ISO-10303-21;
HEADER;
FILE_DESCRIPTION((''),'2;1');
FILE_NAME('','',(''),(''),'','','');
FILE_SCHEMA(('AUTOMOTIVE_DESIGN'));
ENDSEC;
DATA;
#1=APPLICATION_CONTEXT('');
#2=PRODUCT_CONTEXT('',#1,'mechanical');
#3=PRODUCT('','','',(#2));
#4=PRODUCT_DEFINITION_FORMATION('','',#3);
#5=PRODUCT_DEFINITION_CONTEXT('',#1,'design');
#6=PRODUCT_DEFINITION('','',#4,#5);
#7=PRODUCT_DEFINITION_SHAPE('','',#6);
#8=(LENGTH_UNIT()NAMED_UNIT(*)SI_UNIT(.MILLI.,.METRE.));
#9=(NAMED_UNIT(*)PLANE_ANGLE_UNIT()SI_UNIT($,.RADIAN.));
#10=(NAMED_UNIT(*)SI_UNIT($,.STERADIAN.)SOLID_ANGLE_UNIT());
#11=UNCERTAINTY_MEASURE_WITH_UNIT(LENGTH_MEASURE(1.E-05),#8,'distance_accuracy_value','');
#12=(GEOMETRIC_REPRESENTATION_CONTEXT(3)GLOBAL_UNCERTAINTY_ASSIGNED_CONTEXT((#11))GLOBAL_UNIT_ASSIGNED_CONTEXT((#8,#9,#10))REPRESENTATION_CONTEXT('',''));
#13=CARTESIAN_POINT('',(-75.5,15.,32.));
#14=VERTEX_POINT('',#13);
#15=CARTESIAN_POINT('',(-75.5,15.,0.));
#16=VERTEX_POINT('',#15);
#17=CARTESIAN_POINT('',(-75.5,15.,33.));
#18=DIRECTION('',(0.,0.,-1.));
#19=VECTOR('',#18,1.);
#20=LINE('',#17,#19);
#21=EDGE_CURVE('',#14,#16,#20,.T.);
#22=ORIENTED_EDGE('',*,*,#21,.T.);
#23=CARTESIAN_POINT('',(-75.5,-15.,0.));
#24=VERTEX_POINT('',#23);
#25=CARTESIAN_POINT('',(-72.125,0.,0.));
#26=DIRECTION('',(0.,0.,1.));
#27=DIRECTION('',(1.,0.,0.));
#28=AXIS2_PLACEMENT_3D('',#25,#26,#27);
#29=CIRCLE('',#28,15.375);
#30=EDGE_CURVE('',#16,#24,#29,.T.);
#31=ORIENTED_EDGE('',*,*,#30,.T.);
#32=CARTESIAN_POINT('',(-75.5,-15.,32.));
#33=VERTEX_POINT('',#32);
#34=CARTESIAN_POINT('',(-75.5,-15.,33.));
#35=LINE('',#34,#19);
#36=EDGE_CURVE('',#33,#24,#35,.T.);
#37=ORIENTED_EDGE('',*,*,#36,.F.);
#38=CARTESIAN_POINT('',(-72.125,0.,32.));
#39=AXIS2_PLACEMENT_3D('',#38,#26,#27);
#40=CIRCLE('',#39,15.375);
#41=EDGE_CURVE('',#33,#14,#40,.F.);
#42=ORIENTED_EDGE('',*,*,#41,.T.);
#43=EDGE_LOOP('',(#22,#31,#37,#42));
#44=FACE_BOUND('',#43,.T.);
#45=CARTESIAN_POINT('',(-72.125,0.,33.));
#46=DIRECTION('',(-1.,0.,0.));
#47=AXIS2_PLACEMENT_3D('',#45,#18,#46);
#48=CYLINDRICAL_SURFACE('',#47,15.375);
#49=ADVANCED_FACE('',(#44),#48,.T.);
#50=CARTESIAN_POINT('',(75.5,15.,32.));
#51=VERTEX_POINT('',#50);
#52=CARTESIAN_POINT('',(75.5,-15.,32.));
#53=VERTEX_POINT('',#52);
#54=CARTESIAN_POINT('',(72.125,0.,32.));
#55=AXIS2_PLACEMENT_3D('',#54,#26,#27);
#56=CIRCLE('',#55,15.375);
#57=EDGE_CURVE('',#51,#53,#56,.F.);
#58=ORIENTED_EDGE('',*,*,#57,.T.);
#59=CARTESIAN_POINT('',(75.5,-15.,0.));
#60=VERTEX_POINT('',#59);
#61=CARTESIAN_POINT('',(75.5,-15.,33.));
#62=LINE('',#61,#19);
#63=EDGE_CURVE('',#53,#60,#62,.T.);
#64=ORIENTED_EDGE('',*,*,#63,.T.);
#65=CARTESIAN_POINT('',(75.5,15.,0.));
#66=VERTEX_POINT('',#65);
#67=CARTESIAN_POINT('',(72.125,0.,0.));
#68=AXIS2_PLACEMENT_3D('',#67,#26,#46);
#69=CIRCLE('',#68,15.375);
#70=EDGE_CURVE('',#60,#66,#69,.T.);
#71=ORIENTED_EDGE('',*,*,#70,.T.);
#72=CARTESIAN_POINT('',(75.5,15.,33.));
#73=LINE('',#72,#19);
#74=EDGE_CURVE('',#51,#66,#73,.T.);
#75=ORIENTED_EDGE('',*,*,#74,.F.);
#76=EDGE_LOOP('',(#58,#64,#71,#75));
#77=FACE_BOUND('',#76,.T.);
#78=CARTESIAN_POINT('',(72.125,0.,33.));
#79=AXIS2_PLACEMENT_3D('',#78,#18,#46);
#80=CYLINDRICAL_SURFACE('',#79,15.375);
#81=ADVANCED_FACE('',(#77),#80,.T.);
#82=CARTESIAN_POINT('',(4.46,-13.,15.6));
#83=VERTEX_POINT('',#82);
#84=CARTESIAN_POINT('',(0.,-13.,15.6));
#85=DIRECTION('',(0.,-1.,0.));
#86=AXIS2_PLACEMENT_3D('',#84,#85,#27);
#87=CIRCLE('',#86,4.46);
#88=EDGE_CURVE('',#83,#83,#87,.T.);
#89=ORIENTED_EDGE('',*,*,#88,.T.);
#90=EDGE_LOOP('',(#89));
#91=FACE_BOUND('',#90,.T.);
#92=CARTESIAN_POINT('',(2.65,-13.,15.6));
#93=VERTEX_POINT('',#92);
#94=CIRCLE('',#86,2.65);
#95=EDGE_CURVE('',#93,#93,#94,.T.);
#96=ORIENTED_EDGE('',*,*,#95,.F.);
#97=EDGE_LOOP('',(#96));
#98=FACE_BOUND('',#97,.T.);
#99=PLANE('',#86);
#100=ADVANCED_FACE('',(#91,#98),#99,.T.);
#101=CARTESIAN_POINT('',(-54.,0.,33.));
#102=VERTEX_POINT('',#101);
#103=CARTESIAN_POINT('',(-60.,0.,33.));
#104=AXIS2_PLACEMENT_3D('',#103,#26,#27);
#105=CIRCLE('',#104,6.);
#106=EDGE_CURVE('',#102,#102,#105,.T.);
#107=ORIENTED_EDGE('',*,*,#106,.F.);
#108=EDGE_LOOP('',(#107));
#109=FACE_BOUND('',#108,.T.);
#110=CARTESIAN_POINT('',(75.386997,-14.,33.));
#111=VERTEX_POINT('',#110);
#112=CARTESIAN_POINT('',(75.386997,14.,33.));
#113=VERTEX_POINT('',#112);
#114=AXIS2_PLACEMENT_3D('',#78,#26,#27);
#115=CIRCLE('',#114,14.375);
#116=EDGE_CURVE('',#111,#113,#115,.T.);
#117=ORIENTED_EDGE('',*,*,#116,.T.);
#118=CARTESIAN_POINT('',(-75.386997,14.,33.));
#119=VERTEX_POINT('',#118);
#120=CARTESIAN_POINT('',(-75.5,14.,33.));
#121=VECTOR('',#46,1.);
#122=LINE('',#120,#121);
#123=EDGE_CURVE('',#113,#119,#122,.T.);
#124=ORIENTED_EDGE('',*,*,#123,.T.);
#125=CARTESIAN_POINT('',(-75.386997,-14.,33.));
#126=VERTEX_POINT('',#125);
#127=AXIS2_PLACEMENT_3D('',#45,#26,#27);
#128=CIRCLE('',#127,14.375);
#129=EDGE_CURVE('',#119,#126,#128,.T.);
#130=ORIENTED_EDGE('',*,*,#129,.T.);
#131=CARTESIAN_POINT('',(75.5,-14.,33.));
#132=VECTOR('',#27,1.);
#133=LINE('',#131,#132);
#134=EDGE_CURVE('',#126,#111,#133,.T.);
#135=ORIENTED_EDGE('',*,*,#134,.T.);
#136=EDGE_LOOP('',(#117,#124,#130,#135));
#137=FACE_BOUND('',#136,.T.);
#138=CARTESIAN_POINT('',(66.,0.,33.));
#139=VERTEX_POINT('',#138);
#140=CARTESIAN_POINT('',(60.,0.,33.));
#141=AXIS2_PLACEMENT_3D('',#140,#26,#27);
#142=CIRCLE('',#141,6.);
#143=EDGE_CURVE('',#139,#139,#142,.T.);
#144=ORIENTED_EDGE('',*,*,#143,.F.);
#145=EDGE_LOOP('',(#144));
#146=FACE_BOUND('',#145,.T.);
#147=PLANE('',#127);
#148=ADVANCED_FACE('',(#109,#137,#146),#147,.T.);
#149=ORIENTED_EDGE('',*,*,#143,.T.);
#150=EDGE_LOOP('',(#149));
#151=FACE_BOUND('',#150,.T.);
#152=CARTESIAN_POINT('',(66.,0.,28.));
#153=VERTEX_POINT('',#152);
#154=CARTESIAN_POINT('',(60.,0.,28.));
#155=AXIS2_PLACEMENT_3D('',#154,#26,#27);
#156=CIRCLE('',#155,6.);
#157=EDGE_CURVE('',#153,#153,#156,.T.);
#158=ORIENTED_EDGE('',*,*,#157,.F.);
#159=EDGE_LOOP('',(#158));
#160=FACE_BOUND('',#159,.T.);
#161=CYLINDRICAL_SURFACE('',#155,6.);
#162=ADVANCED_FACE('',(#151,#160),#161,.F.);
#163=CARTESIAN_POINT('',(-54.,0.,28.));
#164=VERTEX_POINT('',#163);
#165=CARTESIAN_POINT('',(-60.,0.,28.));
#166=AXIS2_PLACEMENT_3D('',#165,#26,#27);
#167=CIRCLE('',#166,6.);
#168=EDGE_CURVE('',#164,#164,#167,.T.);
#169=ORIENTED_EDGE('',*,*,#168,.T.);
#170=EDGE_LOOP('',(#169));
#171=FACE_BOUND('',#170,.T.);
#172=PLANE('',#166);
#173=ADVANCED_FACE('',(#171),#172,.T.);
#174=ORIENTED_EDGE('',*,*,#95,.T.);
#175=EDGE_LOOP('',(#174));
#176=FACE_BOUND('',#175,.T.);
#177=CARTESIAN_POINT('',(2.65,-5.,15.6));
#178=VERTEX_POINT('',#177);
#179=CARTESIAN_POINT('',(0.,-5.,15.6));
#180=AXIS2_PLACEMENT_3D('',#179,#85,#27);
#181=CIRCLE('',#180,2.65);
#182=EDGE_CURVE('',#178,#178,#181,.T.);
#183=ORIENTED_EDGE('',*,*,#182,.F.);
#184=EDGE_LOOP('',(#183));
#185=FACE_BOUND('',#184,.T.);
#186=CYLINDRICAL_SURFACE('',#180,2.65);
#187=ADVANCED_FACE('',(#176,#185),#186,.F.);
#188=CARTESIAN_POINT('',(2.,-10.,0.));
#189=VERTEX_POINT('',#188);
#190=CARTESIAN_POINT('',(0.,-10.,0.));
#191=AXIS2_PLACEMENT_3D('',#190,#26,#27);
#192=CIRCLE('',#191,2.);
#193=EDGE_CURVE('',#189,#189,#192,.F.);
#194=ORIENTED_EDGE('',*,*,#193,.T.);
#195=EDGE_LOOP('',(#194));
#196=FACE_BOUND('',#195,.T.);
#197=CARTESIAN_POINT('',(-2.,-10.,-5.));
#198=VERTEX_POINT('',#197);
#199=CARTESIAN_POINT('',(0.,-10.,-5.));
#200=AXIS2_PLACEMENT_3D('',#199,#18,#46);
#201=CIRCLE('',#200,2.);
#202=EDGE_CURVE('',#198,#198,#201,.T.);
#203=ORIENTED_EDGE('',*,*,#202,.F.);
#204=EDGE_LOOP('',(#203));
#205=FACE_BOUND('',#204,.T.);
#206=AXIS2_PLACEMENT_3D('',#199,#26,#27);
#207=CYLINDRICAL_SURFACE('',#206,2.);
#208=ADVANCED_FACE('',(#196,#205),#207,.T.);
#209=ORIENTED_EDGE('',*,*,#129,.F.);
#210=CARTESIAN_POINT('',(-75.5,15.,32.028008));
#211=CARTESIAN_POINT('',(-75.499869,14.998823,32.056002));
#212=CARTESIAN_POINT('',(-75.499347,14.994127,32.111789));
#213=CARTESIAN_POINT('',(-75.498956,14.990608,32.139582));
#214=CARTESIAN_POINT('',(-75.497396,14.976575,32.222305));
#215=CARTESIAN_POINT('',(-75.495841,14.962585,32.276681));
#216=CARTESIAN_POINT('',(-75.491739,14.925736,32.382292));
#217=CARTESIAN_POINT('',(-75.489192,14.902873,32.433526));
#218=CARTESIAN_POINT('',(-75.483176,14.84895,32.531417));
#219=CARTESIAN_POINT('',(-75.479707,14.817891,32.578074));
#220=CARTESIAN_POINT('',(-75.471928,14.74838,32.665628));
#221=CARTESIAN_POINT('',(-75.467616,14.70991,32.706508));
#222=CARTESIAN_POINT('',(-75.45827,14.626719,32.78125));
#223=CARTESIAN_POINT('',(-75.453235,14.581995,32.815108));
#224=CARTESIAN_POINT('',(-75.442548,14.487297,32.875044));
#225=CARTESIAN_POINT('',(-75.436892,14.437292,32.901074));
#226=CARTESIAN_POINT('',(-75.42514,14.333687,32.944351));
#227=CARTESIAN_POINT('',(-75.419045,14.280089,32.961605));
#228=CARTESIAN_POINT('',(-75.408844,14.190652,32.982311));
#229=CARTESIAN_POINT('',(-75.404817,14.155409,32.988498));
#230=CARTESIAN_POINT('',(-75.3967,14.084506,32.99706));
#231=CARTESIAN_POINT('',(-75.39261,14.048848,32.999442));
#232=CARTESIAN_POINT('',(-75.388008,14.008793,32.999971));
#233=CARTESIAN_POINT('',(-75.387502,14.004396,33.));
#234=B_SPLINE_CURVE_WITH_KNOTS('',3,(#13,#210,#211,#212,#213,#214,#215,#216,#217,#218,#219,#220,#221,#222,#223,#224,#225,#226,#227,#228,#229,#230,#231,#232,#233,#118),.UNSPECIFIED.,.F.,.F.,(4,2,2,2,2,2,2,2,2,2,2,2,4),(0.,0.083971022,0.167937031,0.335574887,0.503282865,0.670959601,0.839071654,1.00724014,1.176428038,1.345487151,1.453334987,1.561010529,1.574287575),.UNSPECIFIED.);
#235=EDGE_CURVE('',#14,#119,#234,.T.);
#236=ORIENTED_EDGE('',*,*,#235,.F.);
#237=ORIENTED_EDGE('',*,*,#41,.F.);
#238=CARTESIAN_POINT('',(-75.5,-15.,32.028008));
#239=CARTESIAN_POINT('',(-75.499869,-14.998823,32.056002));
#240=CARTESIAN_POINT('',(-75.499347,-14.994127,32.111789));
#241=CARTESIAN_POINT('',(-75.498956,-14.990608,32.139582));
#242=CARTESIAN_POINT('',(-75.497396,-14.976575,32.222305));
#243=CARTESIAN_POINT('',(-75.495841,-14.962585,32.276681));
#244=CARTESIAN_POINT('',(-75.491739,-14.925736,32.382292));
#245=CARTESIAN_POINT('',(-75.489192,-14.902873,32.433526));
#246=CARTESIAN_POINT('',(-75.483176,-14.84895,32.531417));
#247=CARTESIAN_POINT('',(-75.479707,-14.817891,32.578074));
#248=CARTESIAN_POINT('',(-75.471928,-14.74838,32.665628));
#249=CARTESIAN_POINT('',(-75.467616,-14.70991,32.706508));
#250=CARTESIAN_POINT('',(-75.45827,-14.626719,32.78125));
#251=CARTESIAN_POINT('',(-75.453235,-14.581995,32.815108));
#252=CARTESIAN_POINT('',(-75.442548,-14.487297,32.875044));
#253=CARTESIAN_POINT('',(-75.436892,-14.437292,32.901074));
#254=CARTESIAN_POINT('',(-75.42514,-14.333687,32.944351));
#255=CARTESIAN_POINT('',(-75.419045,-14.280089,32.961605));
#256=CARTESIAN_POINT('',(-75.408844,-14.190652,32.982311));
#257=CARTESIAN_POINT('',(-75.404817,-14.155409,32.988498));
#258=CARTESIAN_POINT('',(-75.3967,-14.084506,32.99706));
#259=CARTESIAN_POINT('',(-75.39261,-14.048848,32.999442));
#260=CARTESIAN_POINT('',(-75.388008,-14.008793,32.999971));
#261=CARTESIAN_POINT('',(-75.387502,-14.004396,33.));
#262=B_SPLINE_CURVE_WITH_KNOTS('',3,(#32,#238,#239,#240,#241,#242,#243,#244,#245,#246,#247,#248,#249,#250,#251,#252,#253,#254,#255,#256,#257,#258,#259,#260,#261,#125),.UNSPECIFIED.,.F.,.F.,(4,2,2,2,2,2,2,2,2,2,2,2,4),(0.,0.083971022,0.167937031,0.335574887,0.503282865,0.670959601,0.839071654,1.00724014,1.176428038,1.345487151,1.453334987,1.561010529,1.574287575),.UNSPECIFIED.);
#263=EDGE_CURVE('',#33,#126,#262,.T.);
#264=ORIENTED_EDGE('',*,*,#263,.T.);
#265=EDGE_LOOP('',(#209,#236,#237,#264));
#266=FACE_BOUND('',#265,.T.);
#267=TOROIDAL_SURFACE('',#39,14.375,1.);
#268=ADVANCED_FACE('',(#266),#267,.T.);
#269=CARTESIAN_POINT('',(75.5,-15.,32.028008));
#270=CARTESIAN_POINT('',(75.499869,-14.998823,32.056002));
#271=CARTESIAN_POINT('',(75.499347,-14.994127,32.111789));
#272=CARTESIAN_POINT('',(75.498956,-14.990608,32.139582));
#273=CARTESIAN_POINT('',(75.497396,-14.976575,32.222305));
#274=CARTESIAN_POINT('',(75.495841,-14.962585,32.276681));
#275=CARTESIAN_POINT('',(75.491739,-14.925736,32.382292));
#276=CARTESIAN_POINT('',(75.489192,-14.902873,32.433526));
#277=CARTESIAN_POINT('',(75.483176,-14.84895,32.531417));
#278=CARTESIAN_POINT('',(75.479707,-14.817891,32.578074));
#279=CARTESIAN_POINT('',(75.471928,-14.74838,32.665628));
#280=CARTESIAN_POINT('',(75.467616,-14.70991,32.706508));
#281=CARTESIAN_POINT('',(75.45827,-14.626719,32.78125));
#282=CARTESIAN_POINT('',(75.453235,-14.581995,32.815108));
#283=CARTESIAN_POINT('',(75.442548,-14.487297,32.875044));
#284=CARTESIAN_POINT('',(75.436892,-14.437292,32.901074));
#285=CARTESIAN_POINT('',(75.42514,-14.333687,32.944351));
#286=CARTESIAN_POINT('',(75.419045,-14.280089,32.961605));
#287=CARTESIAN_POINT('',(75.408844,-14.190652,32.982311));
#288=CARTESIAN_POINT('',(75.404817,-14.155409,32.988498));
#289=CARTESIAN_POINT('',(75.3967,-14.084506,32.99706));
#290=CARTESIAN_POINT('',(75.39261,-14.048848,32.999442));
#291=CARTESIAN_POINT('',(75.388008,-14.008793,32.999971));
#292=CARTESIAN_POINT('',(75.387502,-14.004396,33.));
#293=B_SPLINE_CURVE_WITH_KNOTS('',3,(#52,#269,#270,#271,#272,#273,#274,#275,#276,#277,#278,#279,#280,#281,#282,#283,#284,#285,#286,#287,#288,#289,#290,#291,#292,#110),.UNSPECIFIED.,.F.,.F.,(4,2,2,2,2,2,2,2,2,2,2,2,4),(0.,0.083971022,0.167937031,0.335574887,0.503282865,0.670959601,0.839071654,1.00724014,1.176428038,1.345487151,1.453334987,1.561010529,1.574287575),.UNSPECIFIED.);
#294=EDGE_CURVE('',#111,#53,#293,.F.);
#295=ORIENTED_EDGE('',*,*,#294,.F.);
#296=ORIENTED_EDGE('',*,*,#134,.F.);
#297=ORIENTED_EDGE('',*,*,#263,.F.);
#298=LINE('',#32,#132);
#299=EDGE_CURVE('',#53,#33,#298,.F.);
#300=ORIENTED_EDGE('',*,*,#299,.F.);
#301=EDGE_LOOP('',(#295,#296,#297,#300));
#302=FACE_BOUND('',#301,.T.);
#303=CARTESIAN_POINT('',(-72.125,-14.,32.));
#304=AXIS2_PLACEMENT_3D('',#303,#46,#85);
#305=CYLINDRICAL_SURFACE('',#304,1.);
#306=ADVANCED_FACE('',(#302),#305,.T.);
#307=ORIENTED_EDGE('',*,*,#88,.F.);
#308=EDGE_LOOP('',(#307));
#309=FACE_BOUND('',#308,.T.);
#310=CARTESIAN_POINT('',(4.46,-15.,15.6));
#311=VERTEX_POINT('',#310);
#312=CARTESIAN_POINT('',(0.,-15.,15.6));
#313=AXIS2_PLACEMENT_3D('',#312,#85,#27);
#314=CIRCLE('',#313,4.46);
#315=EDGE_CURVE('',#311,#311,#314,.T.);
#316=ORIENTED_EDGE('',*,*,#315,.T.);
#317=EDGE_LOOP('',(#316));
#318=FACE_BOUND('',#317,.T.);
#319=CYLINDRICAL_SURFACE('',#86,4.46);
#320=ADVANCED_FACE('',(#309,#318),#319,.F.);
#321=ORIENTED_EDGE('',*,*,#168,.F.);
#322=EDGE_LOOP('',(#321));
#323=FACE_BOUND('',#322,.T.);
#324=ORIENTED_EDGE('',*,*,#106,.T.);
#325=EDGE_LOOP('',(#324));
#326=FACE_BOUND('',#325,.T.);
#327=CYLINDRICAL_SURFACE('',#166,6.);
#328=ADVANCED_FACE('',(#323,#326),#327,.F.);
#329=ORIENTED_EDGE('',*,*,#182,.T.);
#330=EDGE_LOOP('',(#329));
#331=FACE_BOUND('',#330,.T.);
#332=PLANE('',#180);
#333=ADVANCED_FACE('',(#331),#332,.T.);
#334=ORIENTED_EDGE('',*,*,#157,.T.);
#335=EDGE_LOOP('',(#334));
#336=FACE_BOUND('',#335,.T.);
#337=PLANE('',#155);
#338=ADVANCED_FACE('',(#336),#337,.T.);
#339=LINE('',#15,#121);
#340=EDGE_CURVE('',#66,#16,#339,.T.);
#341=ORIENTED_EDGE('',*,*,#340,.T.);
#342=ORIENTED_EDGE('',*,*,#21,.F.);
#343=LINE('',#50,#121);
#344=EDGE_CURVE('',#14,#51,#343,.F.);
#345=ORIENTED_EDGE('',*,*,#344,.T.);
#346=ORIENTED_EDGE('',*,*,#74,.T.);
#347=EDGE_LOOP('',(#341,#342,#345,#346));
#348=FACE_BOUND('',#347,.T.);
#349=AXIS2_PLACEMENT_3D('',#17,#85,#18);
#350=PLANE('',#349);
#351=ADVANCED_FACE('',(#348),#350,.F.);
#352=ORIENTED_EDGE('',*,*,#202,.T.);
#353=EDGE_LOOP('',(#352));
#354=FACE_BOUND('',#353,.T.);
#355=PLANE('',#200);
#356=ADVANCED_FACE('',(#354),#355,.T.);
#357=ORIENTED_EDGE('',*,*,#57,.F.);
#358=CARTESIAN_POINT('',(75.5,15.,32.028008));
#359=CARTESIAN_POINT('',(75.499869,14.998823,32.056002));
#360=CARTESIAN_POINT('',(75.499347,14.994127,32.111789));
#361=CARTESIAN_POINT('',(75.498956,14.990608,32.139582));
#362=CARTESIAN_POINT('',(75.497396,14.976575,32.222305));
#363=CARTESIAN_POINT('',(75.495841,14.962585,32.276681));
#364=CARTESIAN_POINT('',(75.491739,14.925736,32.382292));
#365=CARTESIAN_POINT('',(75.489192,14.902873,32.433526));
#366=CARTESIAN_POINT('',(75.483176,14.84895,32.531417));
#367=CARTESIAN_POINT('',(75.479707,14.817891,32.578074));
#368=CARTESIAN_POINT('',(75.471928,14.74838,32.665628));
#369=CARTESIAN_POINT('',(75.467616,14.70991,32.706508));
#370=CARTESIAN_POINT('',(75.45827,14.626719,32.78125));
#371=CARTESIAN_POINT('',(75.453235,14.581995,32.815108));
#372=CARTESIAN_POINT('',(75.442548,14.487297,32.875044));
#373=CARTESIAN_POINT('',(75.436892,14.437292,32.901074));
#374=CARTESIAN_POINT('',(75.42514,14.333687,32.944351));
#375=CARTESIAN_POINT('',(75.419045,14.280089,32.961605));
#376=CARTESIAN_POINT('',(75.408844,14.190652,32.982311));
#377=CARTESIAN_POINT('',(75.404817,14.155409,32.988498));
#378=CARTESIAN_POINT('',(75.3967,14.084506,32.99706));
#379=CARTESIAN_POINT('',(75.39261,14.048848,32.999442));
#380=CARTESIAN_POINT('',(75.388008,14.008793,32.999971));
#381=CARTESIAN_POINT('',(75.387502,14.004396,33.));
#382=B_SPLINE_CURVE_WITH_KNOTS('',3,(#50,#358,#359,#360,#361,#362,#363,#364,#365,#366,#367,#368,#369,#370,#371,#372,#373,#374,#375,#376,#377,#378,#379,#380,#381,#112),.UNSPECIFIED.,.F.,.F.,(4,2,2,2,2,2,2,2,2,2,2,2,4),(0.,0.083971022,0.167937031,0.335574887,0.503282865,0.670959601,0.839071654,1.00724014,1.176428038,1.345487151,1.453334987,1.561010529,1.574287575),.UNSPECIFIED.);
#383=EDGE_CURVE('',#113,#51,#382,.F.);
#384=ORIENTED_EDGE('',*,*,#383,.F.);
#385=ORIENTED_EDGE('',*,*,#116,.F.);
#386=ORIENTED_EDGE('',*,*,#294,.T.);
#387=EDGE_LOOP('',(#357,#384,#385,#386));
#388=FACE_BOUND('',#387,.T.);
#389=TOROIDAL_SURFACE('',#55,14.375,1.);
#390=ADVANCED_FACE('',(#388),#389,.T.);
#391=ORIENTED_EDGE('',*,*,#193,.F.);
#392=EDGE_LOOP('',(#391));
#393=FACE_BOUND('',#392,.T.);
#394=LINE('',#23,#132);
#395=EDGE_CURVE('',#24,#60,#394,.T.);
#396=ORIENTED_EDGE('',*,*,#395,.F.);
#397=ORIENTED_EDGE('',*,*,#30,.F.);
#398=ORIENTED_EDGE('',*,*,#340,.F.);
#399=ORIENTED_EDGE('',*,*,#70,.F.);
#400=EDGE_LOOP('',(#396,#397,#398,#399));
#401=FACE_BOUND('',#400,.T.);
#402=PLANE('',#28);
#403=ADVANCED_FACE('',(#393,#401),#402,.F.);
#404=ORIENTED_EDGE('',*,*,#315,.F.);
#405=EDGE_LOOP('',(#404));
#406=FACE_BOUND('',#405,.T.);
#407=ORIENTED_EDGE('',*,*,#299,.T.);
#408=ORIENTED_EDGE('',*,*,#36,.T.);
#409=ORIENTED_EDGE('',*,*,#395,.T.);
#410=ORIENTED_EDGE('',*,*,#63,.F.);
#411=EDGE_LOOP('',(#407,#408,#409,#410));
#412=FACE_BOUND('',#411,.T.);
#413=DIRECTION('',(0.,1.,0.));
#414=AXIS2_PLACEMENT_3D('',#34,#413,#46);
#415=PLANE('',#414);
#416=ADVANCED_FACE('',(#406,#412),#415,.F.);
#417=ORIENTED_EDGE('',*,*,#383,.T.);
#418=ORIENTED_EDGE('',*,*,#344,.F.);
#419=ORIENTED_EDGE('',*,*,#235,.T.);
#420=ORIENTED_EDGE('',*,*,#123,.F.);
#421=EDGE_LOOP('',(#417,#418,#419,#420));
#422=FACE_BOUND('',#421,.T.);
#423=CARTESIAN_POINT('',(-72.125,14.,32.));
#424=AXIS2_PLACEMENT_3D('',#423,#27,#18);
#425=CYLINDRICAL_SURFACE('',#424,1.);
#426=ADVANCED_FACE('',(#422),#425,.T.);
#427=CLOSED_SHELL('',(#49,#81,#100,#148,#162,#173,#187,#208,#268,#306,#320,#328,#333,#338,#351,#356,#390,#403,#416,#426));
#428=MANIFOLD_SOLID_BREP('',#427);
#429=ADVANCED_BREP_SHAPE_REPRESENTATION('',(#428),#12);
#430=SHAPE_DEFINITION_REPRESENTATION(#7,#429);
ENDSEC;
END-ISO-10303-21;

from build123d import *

# Parameters (mm, degrees)
ESTRUSIONE_ESTRUSIONE1_DEPTH = 33
RACCORDO1_R                  = 1
SCHIZZO2_R                   = 6
TAGLIO_ESTRUSIONE1_DEPTH     = 5
SCHIZZO3_R                   = 4.46
TAGLIO_ESTRUSIONE2_DEPTH     = 2
SCHIZZO4_R                   = 2.65
TAGLIO_ESTRUSIONE3_DEPTH     = 8
SCHIZZO5_R                   = 2
ESTRUSIONE_ESTRUSIONE2_DEPTH = 5


with BuildPart() as part:
    # Schizzo1 → Estrusione-Estrusione1 (new body)
    with BuildSketch(Plane.XY):
        with BuildLine():
            Line((-75.5, -15), (75.5, -15))
            ThreePointArc((75.5, -15), (87.5, 0), (75.5, 15))
            Line((75.5, 15), (-75.5, 15))
            ThreePointArc((-75.5, 15), (-87.5, 0), (-75.5, -15))
        make_face()
    extrude(amount=ESTRUSIONE_ESTRUSIONE1_DEPTH)

    # Raccordo1
    # the kernel refuses this fillet: 1 mm, written as the material it takes off along each edge
    with BuildSketch(Plane(origin=(72.125, 0, 33), x_dir=(0.05848647839975847, -0.9982882007939364, 0), z_dir=(-0.9982882007939364, -0.05848647839975847, 0))) as raccordo1_piece_1:
        with BuildLine():
            CenterArc((15.375 - RACCORDO1_R, -RACCORDO1_R), RACCORDO1_R, 0, 90)
            Line((15.375 - RACCORDO1_R, 0), (15.375, 0))
            Line((15.375, 0), (15.375, -RACCORDO1_R))
        make_face()
    revolve(axis=Axis((72.125, 0, 33), (0, 0, 1)), revolution_arc=173.294116446, mode=Mode.SUBTRACT)
    with BuildSketch(Plane(origin=(78, 15, 33), x_dir=(0, 0, -1), z_dir=(-1, 0, 0)), Plane(origin=(-78, -15, 33), x_dir=(0, 0, -1), z_dir=(1, 0, 0))) as raccordo1_piece_2:
        with BuildLine():
            CenterArc((RACCORDO1_R, RACCORDO1_R), RACCORDO1_R, 180, 90)
            Line((0, RACCORDO1_R), (0, 0))
            Line((0, 0), (RACCORDO1_R, 0))
        make_face()
    extrude(amount=156, mode=Mode.SUBTRACT)
    with BuildSketch(Plane(origin=(-72.125, 0, 33), x_dir=(-0.05848647839975752, 0.9982882007939364, 0), z_dir=(0.9982882007939364, 0.05848647839975752, 0))) as raccordo1_piece_3:
        with BuildLine():
            CenterArc((15.375 - RACCORDO1_R, -RACCORDO1_R), RACCORDO1_R, 0, 90)
            Line((15.375 - RACCORDO1_R, 0), (15.375, 0))
            Line((15.375, 0), (15.375, -RACCORDO1_R))
        make_face()
    revolve(axis=Axis((-72.125, 0, 33), (0, 0, 1)), revolution_arc=173.294116446, mode=Mode.SUBTRACT)

    # Schizzo2 → Taglio-Estrusione1 (cut)
    with BuildSketch(Plane.XY.offset(33)):
        with Locations((-60, 0)):
            Circle(SCHIZZO2_R)
        with Locations((60, 0)):
            Circle(SCHIZZO2_R)
    extrude(amount=-TAGLIO_ESTRUSIONE1_DEPTH, mode=Mode.SUBTRACT)

    # Schizzo3 → Taglio-Estrusione2 (cut)
    with BuildSketch(Plane.XZ.offset(15)):
        with Locations((0, 15.6)):
            Circle(SCHIZZO3_R)
    extrude(amount=-TAGLIO_ESTRUSIONE2_DEPTH, mode=Mode.SUBTRACT)

    # Schizzo4 → Taglio-Estrusione3 (cut)
    with BuildSketch(Plane.XZ.offset(13)):
        with Locations((0, 15.6)):
            Circle(SCHIZZO4_R)
    extrude(amount=-TAGLIO_ESTRUSIONE3_DEPTH, mode=Mode.SUBTRACT)

    # Schizzo5 → Estrusione-Estrusione2 (add)
    with BuildSketch(Plane(origin=(0, 0, 0), x_dir=(-1, 0, 0), z_dir=(0, 0, -1))):
        with Locations(Location((0, -10, 0), (0, 0, 180))):
            Circle(SCHIZZO5_R)
    extrude(amount=ESTRUSIONE_ESTRUSIONE2_DEPTH)


solid = part.part
